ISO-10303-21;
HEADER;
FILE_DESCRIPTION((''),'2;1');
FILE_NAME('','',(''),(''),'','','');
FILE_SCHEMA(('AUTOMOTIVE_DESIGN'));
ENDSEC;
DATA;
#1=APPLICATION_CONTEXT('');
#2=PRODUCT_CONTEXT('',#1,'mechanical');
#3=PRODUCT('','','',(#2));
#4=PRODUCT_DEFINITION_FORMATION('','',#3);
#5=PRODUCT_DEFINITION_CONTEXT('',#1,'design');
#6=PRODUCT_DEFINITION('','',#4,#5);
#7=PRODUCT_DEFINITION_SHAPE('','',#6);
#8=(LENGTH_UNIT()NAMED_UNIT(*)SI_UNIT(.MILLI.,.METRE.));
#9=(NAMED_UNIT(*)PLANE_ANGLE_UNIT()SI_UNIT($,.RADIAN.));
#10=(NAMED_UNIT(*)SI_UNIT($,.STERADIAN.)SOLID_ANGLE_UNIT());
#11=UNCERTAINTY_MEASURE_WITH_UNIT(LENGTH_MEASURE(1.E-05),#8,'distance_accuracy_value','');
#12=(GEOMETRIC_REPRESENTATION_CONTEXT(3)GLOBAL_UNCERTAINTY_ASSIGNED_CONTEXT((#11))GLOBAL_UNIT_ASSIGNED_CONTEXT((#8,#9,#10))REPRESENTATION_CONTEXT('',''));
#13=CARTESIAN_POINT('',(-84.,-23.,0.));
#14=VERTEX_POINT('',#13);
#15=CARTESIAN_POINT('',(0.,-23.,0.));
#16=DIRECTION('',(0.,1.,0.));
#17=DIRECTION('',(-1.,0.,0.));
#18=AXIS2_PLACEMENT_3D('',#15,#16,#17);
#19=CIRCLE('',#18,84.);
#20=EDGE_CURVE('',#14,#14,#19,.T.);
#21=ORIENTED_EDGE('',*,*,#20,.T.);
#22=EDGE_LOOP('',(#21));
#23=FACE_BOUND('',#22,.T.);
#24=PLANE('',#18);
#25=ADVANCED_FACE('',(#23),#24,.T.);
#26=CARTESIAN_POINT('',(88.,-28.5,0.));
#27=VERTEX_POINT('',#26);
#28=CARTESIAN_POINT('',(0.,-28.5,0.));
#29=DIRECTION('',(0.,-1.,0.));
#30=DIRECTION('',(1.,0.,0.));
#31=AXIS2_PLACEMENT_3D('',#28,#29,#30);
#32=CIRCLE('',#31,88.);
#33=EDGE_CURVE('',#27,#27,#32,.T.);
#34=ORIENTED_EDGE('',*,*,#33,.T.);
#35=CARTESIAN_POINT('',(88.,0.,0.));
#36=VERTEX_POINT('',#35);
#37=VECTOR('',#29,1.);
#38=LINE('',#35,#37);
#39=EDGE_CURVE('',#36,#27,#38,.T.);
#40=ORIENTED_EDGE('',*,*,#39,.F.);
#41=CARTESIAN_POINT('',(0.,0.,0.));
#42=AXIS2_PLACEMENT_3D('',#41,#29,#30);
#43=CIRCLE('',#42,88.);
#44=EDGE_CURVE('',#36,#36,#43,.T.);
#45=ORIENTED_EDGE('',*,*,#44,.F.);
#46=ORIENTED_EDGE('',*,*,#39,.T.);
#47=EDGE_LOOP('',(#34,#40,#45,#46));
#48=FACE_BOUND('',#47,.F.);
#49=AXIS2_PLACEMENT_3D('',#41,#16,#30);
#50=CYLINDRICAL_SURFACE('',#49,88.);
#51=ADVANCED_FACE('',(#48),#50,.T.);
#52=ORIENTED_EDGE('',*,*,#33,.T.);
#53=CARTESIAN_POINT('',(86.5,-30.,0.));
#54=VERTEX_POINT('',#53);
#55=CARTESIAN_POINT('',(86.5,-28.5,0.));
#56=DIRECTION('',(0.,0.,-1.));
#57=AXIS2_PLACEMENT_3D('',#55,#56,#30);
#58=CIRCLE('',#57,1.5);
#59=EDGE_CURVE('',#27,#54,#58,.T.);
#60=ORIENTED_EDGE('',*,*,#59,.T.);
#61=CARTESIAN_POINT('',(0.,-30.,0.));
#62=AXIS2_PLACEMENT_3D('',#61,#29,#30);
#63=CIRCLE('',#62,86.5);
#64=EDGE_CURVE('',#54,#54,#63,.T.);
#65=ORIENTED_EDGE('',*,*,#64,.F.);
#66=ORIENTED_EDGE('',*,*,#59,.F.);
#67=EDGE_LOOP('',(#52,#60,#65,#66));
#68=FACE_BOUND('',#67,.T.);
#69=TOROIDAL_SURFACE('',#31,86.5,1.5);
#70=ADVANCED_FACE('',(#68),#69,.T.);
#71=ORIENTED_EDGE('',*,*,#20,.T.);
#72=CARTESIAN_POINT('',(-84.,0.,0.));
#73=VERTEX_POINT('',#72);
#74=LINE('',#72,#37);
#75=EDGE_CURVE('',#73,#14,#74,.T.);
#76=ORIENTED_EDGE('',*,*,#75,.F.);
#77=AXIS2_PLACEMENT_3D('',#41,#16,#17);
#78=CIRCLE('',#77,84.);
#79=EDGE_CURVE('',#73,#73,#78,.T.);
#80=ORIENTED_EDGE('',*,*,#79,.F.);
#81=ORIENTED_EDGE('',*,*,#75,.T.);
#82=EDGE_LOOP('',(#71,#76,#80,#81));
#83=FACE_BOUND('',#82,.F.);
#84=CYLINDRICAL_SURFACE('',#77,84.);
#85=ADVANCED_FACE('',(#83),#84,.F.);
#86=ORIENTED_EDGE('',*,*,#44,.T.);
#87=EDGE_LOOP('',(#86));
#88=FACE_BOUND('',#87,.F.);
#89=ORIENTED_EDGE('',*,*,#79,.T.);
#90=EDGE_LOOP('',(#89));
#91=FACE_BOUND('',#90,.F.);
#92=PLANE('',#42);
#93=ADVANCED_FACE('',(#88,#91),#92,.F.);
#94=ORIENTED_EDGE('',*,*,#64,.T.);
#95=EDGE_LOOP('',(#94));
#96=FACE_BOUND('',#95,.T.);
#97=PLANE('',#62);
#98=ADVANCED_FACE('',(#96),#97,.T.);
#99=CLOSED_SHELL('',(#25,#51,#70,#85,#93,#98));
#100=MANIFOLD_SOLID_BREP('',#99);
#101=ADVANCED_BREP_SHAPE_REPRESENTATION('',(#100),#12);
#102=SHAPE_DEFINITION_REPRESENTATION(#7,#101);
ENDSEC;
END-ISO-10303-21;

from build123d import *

# Parameters (mm, degrees)
F0_R     = 88
F1_DEPTH = 30
F2_R     = 84
F3_DEPTH = 23
F4_R     = 1.5


# Not quite as in the source:
# - a feature names something its author has since deleted; it is built from what else it names


with BuildPart() as f1:
    # F0 (on Front) → F1 (new body)
    with BuildSketch(Plane.XZ):
        Circle(F0_R)
    extrude(amount=F1_DEPTH)

    # F2 (on face) → F3 (cut)
    with BuildSketch(Plane(origin=(0, 0, 0), x_dir=(-1, 0, 0), z_dir=(0, 1, 0))):
        Circle(F2_R)
    extrude(amount=-F3_DEPTH, mode=Mode.SUBTRACT)

    # F4
    f4_edges = [f1.edges().sort_by_distance(p)[0] for p in [
        (-88, -30, 0),
    ]]
    fillet(f4_edges, radius=F4_R)


solid = f1.part
